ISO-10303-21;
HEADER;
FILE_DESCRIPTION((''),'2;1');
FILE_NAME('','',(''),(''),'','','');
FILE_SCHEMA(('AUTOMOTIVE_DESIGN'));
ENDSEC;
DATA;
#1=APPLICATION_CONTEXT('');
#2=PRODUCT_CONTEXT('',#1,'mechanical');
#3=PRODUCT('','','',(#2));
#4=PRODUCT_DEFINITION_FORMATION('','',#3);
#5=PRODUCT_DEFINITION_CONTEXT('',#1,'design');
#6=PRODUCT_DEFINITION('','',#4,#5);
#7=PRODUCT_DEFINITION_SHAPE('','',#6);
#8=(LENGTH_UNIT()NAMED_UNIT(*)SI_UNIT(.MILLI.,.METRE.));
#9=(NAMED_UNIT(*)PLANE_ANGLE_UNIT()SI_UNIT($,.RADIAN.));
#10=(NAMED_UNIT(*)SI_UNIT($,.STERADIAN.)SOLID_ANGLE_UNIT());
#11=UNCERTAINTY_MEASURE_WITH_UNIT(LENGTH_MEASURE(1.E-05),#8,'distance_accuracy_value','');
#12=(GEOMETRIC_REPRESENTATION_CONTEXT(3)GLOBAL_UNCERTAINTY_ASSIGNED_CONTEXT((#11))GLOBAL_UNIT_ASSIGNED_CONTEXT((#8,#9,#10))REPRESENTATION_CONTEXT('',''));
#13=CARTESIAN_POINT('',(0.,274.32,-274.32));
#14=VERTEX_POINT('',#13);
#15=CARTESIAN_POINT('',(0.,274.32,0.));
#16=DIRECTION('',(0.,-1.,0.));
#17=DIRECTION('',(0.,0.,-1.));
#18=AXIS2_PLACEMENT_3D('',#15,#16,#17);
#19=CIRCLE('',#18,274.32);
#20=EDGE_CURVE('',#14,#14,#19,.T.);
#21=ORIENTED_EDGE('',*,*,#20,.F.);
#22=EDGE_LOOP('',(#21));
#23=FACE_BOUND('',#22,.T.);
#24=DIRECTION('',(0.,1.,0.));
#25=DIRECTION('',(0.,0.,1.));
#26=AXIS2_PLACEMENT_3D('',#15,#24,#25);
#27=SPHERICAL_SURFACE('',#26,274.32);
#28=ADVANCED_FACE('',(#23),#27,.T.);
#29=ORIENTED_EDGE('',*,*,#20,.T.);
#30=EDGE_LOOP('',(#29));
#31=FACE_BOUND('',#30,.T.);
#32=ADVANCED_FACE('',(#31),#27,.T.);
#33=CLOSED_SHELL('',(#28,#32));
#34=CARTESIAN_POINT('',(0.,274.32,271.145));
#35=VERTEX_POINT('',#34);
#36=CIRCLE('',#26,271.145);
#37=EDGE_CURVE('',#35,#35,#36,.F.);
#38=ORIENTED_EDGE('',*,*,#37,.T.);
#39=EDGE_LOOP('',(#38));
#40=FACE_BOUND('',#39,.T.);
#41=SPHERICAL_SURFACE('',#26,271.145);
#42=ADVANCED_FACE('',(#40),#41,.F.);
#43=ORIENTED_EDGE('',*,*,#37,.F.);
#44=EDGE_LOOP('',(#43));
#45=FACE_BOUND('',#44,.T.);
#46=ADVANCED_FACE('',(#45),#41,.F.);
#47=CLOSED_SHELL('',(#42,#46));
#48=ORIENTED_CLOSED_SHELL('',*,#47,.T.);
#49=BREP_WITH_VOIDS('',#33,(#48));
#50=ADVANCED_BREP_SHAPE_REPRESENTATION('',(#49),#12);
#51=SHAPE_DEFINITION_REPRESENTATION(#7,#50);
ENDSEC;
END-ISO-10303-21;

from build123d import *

# Parameters (mm, degrees)
SKETCH1_R           = 274.32
BOSS_EXTRUDE1_DEPTH = 548.64
FILLET1_R           = 274.32
SHELL2_T            = 3.175


with BuildPart() as part:
    # Sketch1 → Boss-Extrude1 (new body)
    with BuildSketch(Plane(origin=(0, 0, 0), x_dir=(1, 0, 0), z_dir=(0, 1, 0))):
        with Locations(Location((0, 0, 0), (0, 0, 270))):
            Circle(SKETCH1_R)
    extrude(amount=BOSS_EXTRUDE1_DEPTH)

    # Fillet1
    fillet1_edges = [part.edges().sort_by_distance(p)[0] for p in [
        (0, 0, -274.32),
        (0, 548.64, -274.32),
    ]]
    fillet(fillet1_edges, radius=FILLET1_R - 0.0001)  # a hair under: the kernel refuses the full size

    # Shell2 (no face opened: a closed hollow body)
    add(offset(amount=-SHELL2_T, mode=Mode.PRIVATE), mode=Mode.SUBTRACT)


solid = part.part
